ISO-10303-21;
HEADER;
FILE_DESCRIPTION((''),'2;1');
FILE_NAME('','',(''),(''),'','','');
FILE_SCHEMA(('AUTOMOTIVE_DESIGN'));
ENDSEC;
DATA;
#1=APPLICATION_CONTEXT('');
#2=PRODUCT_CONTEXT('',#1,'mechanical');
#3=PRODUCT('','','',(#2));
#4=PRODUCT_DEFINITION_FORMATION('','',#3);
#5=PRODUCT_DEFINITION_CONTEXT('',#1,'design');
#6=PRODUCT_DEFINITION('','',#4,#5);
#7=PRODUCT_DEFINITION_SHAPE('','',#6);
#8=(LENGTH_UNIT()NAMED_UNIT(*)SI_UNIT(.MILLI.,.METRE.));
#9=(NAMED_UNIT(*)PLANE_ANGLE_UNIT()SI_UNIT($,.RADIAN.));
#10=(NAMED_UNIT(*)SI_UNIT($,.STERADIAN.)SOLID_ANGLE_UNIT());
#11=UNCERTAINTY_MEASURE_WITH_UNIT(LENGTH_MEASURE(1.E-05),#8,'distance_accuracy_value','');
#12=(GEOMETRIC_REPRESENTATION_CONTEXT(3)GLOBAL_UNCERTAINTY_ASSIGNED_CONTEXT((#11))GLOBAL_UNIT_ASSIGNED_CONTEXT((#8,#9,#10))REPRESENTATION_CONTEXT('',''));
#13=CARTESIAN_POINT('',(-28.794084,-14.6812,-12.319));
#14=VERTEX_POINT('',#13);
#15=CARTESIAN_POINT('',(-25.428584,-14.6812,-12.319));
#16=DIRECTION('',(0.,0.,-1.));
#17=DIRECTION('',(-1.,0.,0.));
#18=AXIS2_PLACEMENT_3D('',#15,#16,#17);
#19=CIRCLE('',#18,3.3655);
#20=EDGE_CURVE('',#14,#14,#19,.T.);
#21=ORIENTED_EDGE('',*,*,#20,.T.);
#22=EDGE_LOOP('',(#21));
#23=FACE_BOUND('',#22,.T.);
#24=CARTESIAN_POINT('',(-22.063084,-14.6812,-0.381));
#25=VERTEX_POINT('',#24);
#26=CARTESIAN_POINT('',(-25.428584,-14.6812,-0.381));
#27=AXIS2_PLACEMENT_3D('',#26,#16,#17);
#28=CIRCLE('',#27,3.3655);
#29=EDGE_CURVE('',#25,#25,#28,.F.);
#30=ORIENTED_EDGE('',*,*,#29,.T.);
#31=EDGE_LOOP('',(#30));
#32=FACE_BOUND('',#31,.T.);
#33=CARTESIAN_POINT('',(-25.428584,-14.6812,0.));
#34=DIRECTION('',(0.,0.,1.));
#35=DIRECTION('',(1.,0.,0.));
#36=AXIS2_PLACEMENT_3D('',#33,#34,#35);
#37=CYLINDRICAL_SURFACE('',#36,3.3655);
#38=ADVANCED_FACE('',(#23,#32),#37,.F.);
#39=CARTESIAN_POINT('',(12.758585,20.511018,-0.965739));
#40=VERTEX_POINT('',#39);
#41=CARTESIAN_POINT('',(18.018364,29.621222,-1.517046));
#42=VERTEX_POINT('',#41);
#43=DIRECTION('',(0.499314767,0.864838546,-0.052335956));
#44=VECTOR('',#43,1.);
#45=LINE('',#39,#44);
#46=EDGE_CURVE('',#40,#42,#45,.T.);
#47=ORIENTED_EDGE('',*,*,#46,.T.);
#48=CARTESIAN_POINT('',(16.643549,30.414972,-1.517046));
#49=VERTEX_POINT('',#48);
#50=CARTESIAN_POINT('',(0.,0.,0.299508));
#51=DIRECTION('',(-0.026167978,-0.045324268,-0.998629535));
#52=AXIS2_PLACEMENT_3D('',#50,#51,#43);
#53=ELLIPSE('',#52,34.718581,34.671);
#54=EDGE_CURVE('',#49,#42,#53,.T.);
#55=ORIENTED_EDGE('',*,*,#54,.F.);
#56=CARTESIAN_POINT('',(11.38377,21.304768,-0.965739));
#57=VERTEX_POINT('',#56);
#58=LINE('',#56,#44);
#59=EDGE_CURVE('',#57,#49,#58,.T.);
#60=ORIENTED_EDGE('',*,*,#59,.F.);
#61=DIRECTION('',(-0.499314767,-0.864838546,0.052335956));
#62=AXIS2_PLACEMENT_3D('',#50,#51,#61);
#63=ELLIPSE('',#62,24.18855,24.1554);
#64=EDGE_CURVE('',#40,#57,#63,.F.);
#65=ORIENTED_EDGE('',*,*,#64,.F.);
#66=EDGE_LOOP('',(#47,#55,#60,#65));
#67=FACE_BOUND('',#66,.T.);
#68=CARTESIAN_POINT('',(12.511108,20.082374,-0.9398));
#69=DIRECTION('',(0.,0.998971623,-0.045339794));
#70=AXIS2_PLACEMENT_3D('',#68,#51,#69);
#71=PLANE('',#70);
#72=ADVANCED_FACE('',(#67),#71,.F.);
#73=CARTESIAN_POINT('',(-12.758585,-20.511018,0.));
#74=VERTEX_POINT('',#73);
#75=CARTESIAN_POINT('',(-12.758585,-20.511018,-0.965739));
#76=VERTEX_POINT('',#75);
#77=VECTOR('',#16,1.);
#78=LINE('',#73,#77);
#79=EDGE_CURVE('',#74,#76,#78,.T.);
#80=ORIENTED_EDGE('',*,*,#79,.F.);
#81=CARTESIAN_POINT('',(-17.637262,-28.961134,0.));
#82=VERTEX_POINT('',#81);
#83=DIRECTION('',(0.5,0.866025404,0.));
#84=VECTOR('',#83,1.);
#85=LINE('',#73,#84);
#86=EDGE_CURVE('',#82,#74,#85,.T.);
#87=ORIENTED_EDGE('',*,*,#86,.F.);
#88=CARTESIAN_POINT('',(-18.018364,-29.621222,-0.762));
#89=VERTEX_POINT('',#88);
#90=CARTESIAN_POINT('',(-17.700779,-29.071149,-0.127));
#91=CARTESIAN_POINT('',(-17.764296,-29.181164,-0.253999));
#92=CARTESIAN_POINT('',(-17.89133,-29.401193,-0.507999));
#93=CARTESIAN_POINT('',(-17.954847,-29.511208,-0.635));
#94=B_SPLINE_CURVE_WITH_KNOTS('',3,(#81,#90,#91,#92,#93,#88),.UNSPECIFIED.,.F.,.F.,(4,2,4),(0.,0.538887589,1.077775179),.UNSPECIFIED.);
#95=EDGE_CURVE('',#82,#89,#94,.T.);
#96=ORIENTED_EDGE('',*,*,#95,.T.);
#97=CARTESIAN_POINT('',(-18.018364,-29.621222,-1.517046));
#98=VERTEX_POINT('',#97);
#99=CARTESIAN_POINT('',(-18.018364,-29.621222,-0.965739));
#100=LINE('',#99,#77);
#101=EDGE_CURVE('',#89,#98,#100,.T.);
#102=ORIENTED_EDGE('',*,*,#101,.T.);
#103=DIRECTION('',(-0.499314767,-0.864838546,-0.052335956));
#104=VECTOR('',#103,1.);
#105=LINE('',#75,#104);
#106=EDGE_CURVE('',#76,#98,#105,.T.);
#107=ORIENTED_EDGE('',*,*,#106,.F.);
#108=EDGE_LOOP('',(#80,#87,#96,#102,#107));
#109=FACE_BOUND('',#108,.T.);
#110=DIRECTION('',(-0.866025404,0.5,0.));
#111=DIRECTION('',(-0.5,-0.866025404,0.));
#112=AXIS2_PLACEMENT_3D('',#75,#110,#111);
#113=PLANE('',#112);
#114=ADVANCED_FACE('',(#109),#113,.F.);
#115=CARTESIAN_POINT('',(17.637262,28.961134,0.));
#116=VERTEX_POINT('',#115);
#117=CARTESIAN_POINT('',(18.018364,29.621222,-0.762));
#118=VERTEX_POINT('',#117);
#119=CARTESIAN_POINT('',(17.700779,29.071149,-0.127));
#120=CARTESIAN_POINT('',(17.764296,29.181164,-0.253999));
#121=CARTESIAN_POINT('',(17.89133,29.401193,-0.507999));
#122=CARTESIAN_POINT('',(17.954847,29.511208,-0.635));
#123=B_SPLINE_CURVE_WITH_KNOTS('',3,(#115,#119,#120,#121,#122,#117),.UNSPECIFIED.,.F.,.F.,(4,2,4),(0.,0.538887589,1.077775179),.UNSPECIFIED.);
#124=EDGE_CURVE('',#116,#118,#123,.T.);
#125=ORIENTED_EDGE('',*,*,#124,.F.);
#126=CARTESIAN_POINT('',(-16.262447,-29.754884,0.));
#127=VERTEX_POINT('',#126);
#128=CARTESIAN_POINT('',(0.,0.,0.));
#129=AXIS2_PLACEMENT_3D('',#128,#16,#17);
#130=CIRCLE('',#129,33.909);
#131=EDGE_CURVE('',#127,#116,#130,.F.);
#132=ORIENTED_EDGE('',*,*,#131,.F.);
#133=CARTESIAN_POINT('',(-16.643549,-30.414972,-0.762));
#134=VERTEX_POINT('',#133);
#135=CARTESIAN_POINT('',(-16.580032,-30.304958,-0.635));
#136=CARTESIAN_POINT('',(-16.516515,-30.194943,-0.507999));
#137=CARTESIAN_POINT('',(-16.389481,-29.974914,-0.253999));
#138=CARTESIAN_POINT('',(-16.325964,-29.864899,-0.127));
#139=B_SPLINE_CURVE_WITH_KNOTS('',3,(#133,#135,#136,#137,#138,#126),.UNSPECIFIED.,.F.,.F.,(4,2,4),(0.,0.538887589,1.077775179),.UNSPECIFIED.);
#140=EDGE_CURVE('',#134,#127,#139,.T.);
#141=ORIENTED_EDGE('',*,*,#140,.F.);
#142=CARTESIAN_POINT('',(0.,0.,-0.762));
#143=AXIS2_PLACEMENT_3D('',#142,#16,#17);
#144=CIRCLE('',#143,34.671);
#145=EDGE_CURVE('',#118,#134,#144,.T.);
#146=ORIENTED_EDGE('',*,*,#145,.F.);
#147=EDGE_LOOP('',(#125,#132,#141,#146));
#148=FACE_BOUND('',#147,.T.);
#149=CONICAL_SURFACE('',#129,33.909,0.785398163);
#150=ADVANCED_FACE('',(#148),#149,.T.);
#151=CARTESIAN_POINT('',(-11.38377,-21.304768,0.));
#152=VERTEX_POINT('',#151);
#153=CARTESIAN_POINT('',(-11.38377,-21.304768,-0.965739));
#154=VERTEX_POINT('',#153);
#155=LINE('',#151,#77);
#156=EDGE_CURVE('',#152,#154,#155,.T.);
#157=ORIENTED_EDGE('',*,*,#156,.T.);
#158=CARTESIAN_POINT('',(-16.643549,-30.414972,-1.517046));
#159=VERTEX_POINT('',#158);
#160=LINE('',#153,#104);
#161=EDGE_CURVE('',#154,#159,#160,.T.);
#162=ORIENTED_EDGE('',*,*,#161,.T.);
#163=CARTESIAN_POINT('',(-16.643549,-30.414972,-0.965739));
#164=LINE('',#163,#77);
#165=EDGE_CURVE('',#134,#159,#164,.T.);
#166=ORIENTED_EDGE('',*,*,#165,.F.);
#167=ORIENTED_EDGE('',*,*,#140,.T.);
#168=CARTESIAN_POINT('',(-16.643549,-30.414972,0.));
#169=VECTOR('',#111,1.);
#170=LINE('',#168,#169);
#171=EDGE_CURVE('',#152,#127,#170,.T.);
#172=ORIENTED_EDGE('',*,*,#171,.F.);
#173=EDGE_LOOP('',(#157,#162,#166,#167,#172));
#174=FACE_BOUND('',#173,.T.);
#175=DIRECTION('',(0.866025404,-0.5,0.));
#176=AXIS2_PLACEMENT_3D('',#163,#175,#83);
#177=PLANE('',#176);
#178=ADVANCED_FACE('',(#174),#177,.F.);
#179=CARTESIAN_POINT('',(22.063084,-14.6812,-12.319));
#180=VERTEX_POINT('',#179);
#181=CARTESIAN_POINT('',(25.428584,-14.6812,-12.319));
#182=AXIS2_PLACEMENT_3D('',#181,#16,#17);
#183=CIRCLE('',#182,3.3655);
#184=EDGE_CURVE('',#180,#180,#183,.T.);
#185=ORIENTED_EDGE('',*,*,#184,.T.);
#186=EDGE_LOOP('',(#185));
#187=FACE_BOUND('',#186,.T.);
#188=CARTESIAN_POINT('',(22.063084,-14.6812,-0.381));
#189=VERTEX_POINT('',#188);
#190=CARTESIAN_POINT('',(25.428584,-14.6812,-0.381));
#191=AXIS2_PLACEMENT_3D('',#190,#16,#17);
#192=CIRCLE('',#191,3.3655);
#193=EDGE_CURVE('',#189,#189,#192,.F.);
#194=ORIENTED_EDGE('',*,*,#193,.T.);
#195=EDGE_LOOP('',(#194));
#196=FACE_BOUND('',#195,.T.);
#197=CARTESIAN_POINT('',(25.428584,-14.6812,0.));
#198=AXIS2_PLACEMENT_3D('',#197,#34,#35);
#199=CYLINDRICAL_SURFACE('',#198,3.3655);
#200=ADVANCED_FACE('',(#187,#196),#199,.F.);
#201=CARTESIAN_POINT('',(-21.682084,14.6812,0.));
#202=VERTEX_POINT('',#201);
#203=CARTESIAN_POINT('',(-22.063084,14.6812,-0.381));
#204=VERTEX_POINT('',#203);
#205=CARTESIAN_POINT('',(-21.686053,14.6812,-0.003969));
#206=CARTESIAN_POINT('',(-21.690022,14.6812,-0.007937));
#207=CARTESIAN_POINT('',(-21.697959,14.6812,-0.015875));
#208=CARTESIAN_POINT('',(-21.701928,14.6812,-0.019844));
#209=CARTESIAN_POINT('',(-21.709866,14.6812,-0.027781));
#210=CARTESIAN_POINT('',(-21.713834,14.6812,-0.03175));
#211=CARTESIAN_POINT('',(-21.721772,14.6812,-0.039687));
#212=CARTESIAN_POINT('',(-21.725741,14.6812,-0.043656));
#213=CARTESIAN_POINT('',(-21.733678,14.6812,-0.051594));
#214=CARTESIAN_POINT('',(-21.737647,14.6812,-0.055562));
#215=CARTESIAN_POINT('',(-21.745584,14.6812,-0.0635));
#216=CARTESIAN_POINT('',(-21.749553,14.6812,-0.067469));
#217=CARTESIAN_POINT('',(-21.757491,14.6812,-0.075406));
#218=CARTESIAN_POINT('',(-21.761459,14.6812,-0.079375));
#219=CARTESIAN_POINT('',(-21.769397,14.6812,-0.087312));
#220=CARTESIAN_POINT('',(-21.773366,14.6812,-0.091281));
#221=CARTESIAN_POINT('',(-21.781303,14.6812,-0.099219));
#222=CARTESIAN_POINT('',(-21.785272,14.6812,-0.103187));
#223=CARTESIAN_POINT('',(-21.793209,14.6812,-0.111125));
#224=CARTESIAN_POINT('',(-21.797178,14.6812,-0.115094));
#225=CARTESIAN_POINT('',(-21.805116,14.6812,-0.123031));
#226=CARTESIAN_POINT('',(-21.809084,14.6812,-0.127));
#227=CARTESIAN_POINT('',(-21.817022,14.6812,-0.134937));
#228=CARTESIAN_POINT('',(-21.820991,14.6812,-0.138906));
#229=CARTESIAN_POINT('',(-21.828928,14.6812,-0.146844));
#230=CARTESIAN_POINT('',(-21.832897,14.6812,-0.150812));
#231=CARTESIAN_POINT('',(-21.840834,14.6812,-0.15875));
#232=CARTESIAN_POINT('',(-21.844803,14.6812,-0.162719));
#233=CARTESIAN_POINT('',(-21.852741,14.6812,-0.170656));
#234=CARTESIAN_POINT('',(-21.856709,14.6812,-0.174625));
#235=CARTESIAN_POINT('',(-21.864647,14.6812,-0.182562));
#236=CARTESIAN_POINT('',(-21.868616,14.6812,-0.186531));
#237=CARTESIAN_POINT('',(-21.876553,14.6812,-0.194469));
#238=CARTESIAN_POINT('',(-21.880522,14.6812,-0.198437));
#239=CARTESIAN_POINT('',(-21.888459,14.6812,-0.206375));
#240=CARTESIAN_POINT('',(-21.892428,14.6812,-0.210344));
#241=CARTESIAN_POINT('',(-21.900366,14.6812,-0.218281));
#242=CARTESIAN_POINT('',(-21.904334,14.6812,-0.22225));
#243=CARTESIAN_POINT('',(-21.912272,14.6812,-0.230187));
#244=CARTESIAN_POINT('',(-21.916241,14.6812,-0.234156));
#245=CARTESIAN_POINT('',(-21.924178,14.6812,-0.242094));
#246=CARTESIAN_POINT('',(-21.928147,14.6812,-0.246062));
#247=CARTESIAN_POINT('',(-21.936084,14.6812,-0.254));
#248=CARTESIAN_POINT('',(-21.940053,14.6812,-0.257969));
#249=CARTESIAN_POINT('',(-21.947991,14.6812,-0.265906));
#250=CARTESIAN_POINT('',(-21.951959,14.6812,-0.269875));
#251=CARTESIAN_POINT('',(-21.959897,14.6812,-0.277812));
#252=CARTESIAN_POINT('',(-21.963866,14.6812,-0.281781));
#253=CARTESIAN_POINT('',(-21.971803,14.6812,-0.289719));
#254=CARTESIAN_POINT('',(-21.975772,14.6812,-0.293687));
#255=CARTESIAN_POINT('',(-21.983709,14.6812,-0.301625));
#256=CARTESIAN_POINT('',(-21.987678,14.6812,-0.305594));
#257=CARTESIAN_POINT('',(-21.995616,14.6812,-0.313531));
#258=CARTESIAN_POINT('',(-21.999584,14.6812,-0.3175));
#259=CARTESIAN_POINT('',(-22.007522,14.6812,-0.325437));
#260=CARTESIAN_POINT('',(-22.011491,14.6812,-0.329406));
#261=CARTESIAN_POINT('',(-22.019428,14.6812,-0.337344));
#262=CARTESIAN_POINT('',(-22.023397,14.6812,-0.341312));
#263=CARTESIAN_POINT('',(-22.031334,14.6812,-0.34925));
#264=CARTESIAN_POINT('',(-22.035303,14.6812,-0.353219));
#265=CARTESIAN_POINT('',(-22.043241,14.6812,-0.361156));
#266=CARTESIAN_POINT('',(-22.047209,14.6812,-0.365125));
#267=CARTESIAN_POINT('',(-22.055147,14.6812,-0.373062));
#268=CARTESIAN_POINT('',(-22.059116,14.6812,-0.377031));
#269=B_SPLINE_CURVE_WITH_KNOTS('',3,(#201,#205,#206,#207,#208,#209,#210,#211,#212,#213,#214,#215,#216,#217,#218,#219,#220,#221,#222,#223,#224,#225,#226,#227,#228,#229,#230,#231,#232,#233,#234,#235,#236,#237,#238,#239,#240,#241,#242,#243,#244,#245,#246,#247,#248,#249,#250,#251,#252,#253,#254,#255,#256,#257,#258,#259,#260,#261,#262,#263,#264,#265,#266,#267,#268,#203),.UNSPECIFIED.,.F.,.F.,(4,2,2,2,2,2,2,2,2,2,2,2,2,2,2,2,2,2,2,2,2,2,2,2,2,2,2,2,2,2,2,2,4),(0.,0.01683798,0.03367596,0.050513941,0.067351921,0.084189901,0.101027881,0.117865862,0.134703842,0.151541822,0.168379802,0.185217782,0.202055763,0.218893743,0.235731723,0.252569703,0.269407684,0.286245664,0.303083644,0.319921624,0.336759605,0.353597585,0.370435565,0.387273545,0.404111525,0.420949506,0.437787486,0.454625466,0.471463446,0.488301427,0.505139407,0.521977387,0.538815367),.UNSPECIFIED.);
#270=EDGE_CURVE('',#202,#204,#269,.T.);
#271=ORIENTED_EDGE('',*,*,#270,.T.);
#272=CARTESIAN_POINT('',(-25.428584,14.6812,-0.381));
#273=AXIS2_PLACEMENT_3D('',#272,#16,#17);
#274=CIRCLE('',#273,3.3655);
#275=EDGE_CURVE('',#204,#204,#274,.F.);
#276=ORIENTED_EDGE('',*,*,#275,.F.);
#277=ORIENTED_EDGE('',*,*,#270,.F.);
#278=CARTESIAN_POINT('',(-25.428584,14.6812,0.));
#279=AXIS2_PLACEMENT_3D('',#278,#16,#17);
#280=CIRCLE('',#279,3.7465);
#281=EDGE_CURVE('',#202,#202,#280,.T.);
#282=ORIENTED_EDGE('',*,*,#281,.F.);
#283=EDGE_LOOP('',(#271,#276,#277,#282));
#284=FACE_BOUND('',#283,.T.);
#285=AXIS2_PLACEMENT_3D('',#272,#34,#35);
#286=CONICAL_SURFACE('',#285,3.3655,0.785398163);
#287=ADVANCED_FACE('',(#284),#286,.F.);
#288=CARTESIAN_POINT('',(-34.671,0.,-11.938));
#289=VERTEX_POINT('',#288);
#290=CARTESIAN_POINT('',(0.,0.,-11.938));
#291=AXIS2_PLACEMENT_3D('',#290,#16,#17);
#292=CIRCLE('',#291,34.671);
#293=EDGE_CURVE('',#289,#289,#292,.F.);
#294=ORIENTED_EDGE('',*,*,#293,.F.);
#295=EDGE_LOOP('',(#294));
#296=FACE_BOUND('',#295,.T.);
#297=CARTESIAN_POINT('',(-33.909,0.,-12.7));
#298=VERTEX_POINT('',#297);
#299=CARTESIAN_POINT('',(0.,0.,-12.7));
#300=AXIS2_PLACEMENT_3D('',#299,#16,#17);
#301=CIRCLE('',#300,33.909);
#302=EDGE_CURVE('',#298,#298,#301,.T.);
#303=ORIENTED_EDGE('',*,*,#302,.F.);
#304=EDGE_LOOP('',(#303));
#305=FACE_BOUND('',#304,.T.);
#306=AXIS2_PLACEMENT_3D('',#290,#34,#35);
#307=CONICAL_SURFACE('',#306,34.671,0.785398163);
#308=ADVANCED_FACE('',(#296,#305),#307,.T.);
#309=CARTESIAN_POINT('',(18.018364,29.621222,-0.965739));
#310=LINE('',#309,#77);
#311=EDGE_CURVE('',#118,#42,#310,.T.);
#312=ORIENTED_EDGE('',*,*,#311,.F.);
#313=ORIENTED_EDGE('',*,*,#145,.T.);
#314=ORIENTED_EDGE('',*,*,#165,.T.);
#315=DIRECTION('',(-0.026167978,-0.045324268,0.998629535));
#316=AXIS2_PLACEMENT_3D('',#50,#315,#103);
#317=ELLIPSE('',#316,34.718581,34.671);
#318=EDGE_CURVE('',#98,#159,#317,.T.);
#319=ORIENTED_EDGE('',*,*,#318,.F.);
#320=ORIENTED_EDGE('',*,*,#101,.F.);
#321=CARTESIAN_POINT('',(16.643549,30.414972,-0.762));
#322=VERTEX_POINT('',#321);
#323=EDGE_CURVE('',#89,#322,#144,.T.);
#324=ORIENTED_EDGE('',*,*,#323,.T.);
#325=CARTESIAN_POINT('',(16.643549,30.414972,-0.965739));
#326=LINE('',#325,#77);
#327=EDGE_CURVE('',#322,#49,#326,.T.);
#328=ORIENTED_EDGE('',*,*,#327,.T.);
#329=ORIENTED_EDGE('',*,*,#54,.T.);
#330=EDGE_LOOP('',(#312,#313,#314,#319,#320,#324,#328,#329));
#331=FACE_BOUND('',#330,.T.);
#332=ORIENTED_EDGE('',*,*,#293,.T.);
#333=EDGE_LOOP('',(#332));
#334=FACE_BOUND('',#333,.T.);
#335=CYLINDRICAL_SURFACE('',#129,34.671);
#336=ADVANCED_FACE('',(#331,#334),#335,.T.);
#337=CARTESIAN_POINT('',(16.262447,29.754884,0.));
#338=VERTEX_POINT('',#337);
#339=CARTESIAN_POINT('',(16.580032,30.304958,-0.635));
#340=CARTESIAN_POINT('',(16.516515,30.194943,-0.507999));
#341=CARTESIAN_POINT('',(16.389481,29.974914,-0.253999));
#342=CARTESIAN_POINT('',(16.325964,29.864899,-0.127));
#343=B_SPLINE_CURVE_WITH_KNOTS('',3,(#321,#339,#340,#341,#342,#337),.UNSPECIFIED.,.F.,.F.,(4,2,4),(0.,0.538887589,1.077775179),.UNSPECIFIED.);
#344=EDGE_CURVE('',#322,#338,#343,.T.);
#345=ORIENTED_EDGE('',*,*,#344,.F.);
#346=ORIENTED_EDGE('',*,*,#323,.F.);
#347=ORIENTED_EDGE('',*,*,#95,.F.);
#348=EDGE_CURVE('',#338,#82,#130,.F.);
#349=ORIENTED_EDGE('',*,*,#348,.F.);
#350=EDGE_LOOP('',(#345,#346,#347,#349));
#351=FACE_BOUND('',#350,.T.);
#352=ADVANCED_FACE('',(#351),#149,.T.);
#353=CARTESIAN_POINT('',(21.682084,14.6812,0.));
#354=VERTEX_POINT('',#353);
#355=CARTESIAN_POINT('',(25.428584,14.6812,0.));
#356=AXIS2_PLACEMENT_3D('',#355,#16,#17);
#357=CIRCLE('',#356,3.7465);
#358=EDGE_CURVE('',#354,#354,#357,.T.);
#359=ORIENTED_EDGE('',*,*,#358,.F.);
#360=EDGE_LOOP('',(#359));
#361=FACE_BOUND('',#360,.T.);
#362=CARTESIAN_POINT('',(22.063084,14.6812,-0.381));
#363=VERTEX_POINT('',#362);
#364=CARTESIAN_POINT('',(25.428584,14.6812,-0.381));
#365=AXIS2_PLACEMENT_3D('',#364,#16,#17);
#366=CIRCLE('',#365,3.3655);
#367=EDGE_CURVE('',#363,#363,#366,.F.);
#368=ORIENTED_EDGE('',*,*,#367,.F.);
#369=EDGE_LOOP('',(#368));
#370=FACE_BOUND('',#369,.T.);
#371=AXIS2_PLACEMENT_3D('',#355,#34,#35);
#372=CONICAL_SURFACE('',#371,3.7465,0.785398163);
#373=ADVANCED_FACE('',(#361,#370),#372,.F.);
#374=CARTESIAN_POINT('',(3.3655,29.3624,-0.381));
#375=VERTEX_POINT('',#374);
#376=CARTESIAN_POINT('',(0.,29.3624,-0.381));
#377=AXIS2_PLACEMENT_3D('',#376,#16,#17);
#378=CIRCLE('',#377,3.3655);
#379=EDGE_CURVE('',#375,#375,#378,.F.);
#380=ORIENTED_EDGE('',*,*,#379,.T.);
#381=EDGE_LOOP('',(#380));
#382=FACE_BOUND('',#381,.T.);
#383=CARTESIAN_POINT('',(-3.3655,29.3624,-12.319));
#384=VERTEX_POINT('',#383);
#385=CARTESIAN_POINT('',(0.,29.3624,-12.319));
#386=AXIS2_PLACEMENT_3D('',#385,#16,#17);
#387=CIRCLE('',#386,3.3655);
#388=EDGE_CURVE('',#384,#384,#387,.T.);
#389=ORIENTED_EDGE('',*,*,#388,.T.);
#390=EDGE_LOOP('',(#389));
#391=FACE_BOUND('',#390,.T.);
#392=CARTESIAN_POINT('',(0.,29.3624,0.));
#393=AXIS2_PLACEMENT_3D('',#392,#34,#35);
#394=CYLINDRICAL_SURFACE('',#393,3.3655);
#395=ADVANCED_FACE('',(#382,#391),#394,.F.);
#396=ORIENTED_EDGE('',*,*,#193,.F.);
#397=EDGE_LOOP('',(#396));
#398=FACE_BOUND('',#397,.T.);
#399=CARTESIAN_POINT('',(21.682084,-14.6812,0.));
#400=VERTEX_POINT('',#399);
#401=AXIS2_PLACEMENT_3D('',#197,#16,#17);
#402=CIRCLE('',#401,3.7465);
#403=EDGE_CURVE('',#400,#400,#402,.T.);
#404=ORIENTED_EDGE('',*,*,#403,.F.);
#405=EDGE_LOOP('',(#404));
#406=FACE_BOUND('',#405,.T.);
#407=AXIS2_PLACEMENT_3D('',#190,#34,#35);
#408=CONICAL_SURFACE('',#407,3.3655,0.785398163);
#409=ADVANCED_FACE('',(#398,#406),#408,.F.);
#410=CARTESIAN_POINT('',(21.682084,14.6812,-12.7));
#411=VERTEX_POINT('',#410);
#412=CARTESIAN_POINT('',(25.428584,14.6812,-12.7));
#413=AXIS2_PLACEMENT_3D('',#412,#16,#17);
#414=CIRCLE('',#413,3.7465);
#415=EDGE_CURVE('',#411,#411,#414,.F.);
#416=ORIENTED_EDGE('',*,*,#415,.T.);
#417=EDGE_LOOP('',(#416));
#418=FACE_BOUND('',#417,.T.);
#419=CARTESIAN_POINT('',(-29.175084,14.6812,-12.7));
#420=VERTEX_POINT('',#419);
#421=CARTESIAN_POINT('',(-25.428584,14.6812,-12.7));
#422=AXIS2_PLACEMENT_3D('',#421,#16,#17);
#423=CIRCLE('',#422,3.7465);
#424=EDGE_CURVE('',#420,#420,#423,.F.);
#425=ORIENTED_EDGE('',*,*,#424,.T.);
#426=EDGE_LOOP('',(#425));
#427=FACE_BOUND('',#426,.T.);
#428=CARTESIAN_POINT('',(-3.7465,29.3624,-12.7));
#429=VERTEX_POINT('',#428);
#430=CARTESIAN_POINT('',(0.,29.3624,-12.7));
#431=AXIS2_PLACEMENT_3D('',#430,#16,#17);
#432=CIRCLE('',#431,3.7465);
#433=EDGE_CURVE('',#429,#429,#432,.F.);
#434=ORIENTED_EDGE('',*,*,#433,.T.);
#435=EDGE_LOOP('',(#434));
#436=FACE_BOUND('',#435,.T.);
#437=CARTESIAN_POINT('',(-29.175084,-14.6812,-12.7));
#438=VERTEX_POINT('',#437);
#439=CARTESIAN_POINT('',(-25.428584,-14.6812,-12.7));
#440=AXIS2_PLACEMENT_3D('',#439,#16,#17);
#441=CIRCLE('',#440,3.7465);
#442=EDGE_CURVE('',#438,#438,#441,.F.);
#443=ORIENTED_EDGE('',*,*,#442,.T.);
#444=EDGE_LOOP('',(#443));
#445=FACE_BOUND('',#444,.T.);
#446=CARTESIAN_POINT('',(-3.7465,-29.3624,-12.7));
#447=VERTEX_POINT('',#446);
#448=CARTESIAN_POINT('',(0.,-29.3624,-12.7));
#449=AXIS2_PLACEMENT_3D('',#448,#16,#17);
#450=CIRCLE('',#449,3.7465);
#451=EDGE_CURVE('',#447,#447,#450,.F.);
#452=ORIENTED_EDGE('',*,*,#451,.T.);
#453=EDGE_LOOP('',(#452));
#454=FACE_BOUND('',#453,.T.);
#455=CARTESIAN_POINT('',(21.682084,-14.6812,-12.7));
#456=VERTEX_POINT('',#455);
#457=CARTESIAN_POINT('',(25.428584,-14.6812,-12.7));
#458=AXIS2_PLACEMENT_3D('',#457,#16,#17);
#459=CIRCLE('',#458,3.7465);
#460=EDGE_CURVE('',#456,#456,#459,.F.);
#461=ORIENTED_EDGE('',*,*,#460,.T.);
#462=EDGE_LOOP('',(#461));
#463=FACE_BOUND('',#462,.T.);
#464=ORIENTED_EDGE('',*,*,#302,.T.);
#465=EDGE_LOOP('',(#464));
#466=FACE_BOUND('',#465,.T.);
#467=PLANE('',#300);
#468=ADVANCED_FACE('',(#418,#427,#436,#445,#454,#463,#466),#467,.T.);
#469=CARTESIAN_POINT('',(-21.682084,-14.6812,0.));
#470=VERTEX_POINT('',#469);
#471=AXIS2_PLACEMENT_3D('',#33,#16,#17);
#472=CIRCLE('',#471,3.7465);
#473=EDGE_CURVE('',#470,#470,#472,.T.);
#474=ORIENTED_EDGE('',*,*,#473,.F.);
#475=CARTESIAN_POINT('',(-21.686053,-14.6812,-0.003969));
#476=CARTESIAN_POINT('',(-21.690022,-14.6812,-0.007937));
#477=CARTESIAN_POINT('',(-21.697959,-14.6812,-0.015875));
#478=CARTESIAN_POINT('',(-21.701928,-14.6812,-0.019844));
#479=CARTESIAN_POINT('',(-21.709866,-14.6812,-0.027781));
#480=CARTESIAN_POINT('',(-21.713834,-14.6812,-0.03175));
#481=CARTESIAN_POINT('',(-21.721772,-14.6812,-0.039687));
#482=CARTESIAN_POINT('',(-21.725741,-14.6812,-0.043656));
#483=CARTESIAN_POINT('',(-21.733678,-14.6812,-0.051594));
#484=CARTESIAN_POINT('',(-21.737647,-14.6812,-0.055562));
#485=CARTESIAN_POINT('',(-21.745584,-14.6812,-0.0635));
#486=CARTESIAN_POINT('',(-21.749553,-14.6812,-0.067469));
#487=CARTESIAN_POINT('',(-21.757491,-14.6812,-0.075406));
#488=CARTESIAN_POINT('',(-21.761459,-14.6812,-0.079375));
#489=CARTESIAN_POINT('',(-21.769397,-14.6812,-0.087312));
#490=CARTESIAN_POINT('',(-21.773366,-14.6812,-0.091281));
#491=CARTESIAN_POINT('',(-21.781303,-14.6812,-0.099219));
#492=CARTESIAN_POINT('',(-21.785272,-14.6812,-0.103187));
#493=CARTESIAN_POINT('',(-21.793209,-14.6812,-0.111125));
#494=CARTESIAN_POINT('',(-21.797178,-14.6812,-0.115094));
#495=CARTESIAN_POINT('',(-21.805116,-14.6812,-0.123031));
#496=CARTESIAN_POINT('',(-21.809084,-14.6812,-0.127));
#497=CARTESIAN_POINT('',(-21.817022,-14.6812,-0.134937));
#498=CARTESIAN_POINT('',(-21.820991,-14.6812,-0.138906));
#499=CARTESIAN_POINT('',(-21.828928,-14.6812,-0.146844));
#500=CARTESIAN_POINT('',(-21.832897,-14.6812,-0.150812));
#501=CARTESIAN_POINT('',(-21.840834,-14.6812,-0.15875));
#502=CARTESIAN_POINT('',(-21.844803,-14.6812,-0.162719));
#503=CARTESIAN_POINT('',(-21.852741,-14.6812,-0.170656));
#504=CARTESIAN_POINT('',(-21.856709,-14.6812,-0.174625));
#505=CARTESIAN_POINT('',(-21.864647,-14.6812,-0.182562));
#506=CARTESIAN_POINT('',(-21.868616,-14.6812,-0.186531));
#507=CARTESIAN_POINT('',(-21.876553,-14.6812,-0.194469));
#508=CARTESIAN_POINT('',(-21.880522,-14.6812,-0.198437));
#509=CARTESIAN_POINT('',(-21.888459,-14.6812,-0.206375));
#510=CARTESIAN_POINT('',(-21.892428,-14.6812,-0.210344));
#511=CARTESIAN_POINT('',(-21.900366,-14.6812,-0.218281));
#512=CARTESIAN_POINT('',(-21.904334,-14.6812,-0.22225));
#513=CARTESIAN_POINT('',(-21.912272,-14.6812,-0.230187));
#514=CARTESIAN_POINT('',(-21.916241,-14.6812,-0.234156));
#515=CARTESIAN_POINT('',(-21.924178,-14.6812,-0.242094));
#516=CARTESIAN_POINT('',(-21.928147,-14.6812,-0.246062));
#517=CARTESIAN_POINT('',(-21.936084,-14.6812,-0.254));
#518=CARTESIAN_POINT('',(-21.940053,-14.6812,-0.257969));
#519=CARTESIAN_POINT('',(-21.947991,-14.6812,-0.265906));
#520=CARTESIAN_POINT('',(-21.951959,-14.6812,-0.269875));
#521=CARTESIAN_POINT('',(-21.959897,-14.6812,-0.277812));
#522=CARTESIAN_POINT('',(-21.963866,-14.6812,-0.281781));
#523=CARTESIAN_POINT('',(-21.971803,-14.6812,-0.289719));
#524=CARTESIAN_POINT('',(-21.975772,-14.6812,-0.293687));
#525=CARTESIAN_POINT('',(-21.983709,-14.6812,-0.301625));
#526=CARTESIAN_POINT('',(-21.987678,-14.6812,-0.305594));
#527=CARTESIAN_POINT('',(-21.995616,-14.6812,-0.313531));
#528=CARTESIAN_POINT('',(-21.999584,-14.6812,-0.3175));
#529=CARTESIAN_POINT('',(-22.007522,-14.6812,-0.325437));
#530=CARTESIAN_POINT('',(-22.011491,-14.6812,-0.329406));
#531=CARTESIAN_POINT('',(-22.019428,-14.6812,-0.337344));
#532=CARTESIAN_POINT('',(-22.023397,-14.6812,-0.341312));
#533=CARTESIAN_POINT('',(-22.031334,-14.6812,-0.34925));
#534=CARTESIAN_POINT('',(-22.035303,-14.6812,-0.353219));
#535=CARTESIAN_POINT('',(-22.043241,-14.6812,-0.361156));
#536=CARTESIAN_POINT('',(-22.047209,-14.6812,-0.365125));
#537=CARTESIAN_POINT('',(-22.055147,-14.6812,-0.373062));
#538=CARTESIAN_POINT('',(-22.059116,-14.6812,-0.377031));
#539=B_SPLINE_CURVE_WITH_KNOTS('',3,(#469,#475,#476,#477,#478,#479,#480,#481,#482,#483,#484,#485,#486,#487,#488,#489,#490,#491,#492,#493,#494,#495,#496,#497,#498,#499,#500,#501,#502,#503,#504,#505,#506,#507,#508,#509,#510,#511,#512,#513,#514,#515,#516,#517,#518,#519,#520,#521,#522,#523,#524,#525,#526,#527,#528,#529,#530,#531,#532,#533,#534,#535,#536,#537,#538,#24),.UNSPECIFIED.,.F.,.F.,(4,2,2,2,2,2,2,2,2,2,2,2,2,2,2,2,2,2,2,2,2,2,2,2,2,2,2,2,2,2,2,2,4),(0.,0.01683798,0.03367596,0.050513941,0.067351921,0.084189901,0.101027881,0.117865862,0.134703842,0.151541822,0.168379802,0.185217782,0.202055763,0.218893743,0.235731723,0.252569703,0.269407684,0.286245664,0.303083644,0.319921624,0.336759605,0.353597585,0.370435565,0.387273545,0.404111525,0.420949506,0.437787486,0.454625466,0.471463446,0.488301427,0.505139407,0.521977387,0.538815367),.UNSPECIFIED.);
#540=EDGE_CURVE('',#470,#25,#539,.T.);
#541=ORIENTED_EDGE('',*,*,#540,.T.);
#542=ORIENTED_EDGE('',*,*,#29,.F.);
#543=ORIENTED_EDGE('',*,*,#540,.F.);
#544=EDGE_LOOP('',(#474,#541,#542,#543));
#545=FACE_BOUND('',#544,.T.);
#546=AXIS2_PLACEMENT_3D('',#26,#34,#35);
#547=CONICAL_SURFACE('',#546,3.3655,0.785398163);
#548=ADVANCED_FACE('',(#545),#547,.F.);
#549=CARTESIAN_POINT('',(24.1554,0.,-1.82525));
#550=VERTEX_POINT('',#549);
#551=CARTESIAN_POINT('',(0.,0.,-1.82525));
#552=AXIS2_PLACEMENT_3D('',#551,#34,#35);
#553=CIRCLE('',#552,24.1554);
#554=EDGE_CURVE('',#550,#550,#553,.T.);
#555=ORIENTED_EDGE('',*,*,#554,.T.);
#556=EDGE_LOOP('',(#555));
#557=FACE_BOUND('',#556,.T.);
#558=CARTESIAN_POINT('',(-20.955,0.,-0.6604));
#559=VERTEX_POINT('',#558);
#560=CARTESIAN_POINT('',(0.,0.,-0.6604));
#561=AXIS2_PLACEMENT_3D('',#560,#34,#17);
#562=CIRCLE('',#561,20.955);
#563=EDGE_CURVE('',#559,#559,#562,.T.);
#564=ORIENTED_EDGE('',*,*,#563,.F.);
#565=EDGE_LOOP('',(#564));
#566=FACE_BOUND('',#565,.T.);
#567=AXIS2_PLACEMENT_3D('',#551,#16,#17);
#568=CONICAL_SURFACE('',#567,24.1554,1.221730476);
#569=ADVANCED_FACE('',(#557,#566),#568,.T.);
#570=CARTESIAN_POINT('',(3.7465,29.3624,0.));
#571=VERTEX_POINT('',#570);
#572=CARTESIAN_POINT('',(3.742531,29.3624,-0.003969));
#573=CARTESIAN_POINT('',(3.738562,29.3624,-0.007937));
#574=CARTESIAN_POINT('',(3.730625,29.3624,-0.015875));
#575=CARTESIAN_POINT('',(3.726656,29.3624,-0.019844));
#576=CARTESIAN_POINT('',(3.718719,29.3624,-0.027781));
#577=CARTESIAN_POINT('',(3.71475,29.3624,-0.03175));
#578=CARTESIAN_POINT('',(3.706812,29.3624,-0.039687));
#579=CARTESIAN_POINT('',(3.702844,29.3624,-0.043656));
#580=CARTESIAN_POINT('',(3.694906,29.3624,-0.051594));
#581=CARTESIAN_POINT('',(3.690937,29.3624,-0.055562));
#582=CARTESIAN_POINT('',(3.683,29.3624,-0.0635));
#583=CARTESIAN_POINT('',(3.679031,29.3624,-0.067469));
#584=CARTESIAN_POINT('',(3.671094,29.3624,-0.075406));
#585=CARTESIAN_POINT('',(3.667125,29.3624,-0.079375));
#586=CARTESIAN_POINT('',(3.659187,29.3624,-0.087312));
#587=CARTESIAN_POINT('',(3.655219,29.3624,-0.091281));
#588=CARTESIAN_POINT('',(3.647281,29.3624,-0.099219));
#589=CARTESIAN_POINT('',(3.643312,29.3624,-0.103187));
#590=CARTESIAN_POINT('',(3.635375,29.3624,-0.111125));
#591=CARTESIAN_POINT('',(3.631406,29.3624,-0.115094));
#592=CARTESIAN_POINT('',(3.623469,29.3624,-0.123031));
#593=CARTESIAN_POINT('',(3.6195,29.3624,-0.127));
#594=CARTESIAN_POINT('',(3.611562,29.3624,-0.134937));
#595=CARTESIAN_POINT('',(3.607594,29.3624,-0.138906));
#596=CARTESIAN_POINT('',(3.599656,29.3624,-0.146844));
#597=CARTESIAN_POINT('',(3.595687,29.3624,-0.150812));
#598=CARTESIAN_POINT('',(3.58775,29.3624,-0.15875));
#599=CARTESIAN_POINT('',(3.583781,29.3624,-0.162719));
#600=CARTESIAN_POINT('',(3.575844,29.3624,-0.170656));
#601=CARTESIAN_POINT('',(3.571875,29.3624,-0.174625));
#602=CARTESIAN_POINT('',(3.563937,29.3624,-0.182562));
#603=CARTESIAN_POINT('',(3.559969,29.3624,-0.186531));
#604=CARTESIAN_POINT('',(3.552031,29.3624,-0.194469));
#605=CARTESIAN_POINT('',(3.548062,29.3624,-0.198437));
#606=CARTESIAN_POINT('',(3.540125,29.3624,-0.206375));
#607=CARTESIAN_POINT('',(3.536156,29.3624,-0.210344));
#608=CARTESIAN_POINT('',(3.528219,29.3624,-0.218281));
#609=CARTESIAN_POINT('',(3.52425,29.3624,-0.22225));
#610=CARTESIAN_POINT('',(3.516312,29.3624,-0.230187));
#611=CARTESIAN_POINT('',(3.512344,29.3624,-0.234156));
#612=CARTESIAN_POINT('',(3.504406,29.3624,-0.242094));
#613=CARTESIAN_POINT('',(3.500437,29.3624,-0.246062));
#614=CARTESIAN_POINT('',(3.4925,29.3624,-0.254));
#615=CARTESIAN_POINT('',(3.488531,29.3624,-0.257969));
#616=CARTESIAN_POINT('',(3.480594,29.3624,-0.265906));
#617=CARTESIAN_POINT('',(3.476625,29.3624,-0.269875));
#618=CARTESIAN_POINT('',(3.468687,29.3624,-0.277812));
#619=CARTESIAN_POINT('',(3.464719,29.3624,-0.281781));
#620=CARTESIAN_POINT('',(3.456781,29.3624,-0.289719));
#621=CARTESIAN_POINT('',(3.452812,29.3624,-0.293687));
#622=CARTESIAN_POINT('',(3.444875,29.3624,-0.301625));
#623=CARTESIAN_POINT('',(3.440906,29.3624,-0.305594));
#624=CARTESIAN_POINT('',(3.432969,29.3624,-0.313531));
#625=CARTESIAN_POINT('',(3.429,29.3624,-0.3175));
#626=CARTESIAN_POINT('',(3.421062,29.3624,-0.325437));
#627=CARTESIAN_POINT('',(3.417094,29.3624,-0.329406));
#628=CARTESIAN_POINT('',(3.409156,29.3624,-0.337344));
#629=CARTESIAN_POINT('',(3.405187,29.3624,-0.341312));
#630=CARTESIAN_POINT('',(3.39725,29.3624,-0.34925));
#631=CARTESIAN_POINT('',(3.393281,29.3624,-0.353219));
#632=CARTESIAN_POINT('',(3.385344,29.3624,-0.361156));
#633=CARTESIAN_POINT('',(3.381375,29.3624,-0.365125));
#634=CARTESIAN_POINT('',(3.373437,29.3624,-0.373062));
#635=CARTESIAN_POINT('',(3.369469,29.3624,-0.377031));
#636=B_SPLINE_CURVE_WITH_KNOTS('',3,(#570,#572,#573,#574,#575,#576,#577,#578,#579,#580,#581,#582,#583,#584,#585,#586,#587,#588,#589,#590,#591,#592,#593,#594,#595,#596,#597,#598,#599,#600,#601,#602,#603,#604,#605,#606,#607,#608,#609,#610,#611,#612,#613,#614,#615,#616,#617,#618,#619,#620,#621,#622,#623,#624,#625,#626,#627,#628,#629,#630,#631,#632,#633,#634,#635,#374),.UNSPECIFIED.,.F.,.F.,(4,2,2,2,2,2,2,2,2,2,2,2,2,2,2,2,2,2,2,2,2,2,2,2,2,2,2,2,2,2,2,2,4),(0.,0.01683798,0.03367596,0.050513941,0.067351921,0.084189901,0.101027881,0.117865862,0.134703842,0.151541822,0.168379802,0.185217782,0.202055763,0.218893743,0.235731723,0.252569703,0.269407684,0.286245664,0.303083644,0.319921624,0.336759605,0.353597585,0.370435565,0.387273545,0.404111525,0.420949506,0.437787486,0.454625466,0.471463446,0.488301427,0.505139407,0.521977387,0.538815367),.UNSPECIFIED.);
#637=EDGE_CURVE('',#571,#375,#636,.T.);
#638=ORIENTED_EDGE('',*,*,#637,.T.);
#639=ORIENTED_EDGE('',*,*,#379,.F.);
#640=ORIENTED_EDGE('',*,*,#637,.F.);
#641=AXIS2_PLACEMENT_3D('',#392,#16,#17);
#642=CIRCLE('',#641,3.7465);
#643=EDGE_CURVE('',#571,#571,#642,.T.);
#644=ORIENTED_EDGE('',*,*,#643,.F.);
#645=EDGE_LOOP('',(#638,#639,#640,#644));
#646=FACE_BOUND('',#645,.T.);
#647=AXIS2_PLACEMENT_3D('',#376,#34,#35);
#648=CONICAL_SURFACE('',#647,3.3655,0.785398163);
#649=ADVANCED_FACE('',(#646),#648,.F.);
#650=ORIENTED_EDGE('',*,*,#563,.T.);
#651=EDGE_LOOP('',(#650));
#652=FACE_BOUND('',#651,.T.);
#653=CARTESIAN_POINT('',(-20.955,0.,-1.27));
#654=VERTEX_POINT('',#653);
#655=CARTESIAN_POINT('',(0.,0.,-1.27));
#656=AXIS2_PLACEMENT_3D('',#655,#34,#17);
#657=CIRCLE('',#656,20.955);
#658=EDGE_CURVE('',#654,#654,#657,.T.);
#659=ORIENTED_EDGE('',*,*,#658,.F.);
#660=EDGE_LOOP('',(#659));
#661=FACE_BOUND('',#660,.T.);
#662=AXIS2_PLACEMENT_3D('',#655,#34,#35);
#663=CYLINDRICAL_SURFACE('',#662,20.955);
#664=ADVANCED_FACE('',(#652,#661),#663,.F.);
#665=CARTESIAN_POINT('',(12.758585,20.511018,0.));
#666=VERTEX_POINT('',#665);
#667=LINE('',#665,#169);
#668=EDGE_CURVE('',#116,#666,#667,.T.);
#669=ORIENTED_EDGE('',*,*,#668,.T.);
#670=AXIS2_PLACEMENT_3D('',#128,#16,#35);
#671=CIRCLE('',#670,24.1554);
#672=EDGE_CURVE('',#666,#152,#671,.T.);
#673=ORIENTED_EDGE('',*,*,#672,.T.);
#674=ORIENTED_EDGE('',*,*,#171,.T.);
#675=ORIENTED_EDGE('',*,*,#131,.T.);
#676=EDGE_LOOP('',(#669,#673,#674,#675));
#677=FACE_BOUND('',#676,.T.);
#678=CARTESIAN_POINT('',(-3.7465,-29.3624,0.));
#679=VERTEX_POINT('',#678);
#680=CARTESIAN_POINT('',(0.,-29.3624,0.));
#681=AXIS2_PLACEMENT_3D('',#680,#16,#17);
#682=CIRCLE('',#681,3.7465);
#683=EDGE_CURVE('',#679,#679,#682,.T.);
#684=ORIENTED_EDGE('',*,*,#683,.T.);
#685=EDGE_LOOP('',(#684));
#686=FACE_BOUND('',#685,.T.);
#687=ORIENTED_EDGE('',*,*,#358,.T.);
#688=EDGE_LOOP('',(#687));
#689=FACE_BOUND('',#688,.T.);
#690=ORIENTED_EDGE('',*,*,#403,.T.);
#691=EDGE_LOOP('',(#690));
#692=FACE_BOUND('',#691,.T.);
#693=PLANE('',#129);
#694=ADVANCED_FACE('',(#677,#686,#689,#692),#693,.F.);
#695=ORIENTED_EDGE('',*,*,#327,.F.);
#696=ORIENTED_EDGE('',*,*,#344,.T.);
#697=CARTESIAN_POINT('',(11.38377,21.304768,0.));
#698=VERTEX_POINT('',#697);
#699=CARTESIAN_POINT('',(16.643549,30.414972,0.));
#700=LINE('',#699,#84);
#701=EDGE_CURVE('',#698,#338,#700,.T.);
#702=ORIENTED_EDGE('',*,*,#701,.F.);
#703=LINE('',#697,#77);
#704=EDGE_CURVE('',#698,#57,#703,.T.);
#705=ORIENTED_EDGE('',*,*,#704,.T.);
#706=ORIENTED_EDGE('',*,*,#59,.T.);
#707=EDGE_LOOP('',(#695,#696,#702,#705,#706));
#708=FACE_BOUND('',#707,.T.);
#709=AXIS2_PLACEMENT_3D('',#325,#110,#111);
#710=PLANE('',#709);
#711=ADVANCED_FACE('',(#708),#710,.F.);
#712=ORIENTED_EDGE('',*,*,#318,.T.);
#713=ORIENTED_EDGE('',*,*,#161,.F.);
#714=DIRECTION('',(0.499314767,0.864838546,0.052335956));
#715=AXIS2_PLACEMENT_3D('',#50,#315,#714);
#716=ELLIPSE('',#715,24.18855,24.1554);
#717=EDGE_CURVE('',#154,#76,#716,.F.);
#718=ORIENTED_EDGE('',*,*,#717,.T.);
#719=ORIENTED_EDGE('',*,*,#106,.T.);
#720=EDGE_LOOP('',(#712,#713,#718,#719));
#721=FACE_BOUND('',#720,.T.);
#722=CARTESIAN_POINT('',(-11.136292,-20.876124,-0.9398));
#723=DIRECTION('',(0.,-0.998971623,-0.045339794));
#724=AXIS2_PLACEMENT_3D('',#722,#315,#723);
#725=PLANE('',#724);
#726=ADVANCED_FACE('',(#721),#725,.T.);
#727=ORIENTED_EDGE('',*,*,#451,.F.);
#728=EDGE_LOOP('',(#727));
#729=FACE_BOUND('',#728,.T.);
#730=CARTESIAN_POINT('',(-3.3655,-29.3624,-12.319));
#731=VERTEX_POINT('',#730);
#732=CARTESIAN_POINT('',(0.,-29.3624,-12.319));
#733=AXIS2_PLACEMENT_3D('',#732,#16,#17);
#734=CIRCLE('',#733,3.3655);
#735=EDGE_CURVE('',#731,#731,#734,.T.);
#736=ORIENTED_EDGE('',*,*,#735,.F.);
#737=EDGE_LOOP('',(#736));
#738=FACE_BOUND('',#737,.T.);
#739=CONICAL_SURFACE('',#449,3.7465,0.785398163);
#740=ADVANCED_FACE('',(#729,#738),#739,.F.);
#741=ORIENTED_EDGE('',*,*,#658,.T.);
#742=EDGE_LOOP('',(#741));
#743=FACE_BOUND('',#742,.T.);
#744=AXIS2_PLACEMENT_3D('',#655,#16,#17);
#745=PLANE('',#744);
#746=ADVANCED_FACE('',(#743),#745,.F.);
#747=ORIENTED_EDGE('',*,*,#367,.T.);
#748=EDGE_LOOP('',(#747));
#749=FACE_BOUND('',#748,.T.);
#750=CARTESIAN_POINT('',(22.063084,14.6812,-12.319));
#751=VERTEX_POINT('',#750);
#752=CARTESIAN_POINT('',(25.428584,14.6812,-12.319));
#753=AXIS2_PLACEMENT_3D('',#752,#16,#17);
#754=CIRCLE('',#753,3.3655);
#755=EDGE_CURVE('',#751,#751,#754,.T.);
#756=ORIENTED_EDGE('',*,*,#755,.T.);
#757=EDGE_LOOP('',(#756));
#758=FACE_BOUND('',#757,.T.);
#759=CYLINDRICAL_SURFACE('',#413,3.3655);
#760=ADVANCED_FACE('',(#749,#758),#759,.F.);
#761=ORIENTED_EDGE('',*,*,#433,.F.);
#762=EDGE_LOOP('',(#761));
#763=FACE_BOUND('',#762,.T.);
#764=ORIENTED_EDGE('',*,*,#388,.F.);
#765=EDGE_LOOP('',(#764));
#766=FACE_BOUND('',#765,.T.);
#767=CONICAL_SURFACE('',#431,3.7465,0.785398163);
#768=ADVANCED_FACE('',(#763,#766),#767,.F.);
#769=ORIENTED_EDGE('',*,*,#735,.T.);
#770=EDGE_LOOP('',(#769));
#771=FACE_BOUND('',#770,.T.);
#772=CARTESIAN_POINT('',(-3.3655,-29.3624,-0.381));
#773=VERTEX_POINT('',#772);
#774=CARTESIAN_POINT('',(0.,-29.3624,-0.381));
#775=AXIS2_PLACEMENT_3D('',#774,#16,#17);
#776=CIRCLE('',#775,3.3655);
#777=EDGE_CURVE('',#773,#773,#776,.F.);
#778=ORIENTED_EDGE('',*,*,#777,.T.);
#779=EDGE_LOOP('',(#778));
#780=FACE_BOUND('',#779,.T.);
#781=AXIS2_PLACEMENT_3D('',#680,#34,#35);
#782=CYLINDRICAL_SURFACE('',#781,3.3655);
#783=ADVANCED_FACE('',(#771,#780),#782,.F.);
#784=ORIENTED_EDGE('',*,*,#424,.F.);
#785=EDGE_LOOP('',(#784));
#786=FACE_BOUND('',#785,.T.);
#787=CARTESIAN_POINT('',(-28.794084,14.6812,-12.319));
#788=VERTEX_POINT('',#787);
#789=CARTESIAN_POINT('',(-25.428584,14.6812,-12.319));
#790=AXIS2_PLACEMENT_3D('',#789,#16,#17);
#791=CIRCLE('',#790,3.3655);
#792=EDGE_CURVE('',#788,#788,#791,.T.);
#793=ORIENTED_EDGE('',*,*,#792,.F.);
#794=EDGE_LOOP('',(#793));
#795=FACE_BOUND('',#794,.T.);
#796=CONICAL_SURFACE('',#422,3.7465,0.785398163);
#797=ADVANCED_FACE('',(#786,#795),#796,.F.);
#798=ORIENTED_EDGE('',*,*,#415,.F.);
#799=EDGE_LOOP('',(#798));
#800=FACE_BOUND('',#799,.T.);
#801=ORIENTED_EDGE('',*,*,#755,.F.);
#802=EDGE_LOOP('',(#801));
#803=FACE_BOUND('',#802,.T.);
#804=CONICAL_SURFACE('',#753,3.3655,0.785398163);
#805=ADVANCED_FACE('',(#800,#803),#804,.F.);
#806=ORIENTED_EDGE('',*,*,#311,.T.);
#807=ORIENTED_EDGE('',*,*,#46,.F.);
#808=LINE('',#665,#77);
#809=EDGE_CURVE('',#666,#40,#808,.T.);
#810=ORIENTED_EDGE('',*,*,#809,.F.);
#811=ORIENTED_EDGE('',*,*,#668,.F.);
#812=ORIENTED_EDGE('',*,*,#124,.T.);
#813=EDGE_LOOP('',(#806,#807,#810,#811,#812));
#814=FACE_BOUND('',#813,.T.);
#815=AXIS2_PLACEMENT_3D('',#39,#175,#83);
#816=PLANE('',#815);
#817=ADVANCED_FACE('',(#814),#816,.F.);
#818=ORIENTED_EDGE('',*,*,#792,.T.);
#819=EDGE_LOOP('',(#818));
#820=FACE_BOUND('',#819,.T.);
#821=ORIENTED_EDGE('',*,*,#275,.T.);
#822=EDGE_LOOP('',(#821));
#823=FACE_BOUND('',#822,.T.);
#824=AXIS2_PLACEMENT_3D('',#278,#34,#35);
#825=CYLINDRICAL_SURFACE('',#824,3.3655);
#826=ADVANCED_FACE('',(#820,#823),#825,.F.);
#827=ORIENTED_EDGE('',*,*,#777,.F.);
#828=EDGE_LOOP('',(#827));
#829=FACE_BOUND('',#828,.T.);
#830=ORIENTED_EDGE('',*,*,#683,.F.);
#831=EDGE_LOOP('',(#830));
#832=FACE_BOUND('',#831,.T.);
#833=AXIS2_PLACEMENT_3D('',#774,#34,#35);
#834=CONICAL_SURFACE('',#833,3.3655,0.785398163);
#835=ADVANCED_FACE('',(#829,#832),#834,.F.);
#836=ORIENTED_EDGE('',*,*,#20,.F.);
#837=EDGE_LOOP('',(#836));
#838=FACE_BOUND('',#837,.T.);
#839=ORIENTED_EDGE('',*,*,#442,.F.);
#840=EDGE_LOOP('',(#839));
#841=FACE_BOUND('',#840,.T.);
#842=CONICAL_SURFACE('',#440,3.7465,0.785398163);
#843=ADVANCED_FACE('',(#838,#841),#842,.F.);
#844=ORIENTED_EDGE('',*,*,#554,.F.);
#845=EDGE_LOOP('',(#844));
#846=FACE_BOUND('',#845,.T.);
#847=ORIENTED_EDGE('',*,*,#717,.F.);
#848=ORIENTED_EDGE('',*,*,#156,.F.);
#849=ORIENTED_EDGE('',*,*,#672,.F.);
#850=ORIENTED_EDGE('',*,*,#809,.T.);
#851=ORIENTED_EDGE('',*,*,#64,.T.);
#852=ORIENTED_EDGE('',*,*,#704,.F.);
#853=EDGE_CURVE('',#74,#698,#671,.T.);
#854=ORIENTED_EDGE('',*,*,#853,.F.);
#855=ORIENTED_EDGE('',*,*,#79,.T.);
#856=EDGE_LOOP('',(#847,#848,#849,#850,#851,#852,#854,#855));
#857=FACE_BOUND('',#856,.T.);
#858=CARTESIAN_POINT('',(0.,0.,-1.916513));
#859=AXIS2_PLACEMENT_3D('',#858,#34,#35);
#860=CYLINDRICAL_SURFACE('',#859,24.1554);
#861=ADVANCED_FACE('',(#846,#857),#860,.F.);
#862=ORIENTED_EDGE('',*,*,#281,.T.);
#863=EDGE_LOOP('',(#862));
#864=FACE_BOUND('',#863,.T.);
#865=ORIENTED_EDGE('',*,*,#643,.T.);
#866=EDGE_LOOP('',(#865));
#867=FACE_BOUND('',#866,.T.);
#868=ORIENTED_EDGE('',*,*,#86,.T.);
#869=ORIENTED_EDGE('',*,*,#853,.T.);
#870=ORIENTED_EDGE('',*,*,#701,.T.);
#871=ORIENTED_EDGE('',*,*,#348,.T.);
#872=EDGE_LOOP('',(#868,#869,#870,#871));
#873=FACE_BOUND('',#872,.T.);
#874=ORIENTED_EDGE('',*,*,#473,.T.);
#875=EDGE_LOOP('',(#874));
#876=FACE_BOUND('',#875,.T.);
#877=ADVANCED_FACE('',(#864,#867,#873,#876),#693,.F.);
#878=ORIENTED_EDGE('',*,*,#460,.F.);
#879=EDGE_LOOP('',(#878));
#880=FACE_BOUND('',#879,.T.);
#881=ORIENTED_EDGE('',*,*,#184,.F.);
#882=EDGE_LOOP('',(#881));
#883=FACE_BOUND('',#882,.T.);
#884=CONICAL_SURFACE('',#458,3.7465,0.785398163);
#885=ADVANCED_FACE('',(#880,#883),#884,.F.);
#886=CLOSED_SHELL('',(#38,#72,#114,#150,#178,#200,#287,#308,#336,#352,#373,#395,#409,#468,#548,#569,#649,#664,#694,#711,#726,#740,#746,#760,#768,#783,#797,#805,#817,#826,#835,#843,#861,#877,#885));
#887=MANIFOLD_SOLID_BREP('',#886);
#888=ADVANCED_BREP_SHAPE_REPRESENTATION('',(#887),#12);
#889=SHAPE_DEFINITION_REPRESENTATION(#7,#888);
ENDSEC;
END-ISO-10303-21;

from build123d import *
from build123d.topology import SkipClean

# Parameters (mm, degrees)
CUT_EXTRUDE1_START       = -11.734260502
CUT_EXTRUDE1_OUTLINE_R   = 34.671
CUT_EXTRUDE1_DEPTH       = 11.182953842
CUT_EXTRUDE1_START_2     = -0.55130666
CUT_EXTRUDE1_2_OUTLINE_R = 24.1554
CUT_EXTRUDE1_2_DEPTH     = 0.856646158
CUT_EXTRUDE1_3_DEPTH     = 0.55130666
CUT_EXTRUDE1_START_3     = -0.79375
CUT_EXTRUDE1_5_DEPTH     = 1.5875
CUT_EXTRUDE2_START       = -0.55130666
CUT_EXTRUDE2_DEPTH       = 0.55130666
BOSS_EXTRUDE1_DEPTH      = 0.55130666
BOSS_EXTRUDE2_DEPTH      = 0.55130666
BOSS_EXTRUDE3_DEPTH      = 0.965739498
BOSS_EXTRUDE4_DEPTH      = 0.965739498
SKETCH7_R                = 20.955
CUT_EXTRUDE3_DEPTH       = 0.6096
M6_CLEARANCE_HOLE1_D     = 6.731
M6_CLEARANCE_HOLE2_D     = 6.731
CHAMFER1_SIZE            = 0.381
CHAMFER2_SIZE            = 0.762


with BuildPart() as part:
    # Cut-Extrude1: read off the stored shape, not the designer's step
    # Cut-Extrude1 outline → Cut-Extrude1 (new body)
    with BuildSketch(Plane.XY.offset(-0.965739498).offset(CUT_EXTRUDE1_START)):
        Circle(CUT_EXTRUDE1_OUTLINE_R)
    extrude(amount=CUT_EXTRUDE1_DEPTH)

    # Cut-Extrude1 2 outline → Cut-Extrude1 2 (add)
    with BuildSketch(Plane.XY.offset(-0.965739498).offset(CUT_EXTRUDE1_START_2)):
        Circle(CUT_EXTRUDE1_2_OUTLINE_R)
    extrude(amount=CUT_EXTRUDE1_2_DEPTH)

    # Cut-Extrude1 3 outline → Cut-Extrude1 3 (add)
    with BuildSketch(Plane.XY.offset(-0.965739498).offset(CUT_EXTRUDE1_START_2)):
        with BuildLine():
            Line((12.758585218, 20.51101783), (18.018364086, 29.621222066))
            ThreePointArc((18.018364086, 29.621222066), (-30.025966775, 17.3355), (-16.643548757, -30.414972066))
            Line((-16.643548757, -30.414972066), (-11.383769889, -21.30476783))
            ThreePointArc((-11.383769889, -21.30476783), (-20.919190039, 12.0777), (12.758585218, 20.51101783))
        make_face()
    extrude(amount=CUT_EXTRUDE1_3_DEPTH)

    # Cut-Extrude1 4 outline → Cut-Extrude1 4 (revolve, cut)
    with BuildSketch(Plane.XZ):
        Polygon((24.1554, -1.825250338), (24.1554, -0.6604), (20.955, -0.6604), align=None)
    revolve(axis=Axis((0, 0, 0), (0, 0, 1)), mode=Mode.SUBTRACT)

    # Cut-Extrude1 5 outline → Cut-Extrude1 5 (cut)
    with BuildSketch(Plane(origin=(0, 0, 0), x_dir=(0.49999999999977696, 0.8660254037845674, 0), z_dir=(0.8660254037845674, -0.4999999999997772, 0)).offset(CUT_EXTRUDE1_START_3)):
        Polygon((36, -0.965739498), (24.142355107, -0.965739498), (34.671, -1.517522396), (36, -1.587172335), align=None)
        Polygon((-34.671, -1.517522396), (-24.142355107, -0.965739498), (-36, -0.965739498), (-36, -1.587172335), align=None)
    extrude(amount=CUT_EXTRUDE1_5_DEPTH, mode=Mode.SUBTRACT)

    # Sketch2 → Cut-Extrude2 (cut)
    with BuildSketch(Plane.XY.offset(-0.965739498).offset(CUT_EXTRUDE2_START)):
        with BuildLine():
            Line((-18.018364086, -29.621222066), (-12.758585218, -20.51101783))
            ThreePointArc((-12.758585218, -20.51101783), (-20.919190039, 12.0777), (11.383769889, 21.30476783))
            Line((11.383769889, 21.30476783), (16.643548757, 30.414972066))
            ThreePointArc((16.643548757, 30.414972066), (-30.025966775, 17.3355), (-18.018364086, -29.621222066))
        make_face()
    extrude(amount=CUT_EXTRUDE2_DEPTH, mode=Mode.SUBTRACT)

    # Sketch3 → Boss-Extrude1 (add)
    with SkipClean():  # the faces are left unmerged after this step: merging them gives an invalid solid
        with BuildSketch(Plane.XY.offset(-1.517046158)):
            with BuildLine():
                Line((-16.643548757, -30.414972066), (-11.383769889, -21.30476783))
                ThreePointArc((-11.383769889, -21.30476783), (20.919190039, -12.0777), (12.758585218, 20.51101783))
                Line((12.758585218, 20.51101783), (18.018364086, 29.621222066))
                ThreePointArc((18.018364086, 29.621222066), (30.025966775, -17.3355), (-16.643548757, -30.414972066))
            make_face()
        extrude(amount=BOSS_EXTRUDE1_DEPTH)

    # Sketch4 → Boss-Extrude2 (add)
    with SkipClean():  # the faces are left unmerged after this step: merging them gives an invalid solid
        with BuildSketch(Plane.XY.offset(-1.517046158)):
            with BuildLine():
                Line((16.643548757, 30.414972066), (11.383769889, 21.30476783))
                ThreePointArc((11.383769889, 21.30476783), (-20.919190039, 12.0777), (-12.758585218, -20.51101783))
                Line((-12.758585218, -20.51101783), (-18.018364086, -29.621222066))
                ThreePointArc((-18.018364086, -29.621222066), (-30.025966775, 17.3355), (16.643548757, 30.414972066))
            make_face()
        extrude(amount=BOSS_EXTRUDE2_DEPTH)

    # Sketch5 → Boss-Extrude3 (add)
    with SkipClean():  # the faces are left unmerged after this step: merging them gives an invalid solid
        with BuildSketch(Plane.XY.offset(-0.965739498)):
            with BuildLine():
                Line((-16.643548757, -30.414972066), (-11.383769889, -21.30476783))
                ThreePointArc((-11.383769889, -21.30476783), (20.919190039, -12.0777), (12.758585218, 20.51101783))
                Line((12.758585218, 20.51101783), (18.018364086, 29.621222066))
                ThreePointArc((18.018364086, 29.621222066), (30.025966775, -17.3355), (-16.643548757, -30.414972066))
            make_face()
        extrude(amount=BOSS_EXTRUDE3_DEPTH)

    # Sketch6 → Boss-Extrude4 (add)
    with SkipClean():  # the faces are left unmerged after this step: merging them gives an invalid solid
        with BuildSketch(Plane.XY.offset(-0.965739498)):
            with BuildLine():
                Line((16.643548757, 30.414972066), (11.383769889, 21.30476783))
                ThreePointArc((11.383769889, 21.30476783), (-20.919190039, 12.0777), (-12.758585218, -20.51101783))
                Line((-12.758585218, -20.51101783), (-18.018364086, -29.621222066))
                ThreePointArc((-18.018364086, -29.621222066), (-30.025966775, 17.3355), (16.643548757, 30.414972066))
            make_face()
        extrude(amount=BOSS_EXTRUDE4_DEPTH)

    # Sketch7 → Cut-Extrude3 (cut)
    with SkipClean():  # the faces are left unmerged after this step: merging them gives an invalid solid
        with BuildSketch(Plane.XY.offset(-0.6604)):
            with Locations(Location((0, 0, 0), (0, 0, 180))):
                Circle(SKETCH7_R)
        extrude(amount=-CUT_EXTRUDE3_DEPTH, mode=Mode.SUBTRACT)

    # M6 Clearance Hole1 (through all)
    with Locations(Plane(origin=(0, 0, -12.7), x_dir=(-1, 0, 0), z_dir=(0, 0, -1))):
        with Locations((-25.428584316, 14.6812)):
            Hole(M6_CLEARANCE_HOLE1_D / 2)

    # M6 Clearance Hole2 (through all)
    with Locations(Plane.XY):
        with Locations((0, 29.3624), (25.428584316, -14.6812), (0, -29.3624), (-25.428584316, -14.6812), (-25.428584316, 14.6812)):
            Hole(M6_CLEARANCE_HOLE2_D / 2)

    # Chamfer1
    chamfer1_edges = [part.edges().sort_by_distance(p)[0] for p in [
        (22.063084316, 14.6812, -12.7),
        (22.063084316, 14.6812, 0),
        (-22.063084316, 14.6812, 0),
        (-22.063084316, 14.6812, -12.7),
        (-22.063084316, -14.6812, 0),
        (-22.063084316, -14.6812, -12.7),
        (3.3655, -29.3624, 0),
        (3.3655, -29.3624, -12.7),
        (28.794084316, -14.6812, 0),
        (28.794084316, -14.6812, -12.7),
        (3.3655, 29.3624, 0),
        (3.3655, 29.3624, -12.7),
    ]]
    chamfer(chamfer1_edges, length=CHAMFER1_SIZE)

    # Chamfer2
    chamfer2_edges = [part.edges().sort_by_distance(p)[0] for p in [
        (30.025966775, -17.3355, 0),
        (-30.025966775, 17.3355, 0),
        (-34.671, 0, -12.7),
    ]]
    chamfer(chamfer2_edges, length=CHAMFER2_SIZE)


solid = part.part
